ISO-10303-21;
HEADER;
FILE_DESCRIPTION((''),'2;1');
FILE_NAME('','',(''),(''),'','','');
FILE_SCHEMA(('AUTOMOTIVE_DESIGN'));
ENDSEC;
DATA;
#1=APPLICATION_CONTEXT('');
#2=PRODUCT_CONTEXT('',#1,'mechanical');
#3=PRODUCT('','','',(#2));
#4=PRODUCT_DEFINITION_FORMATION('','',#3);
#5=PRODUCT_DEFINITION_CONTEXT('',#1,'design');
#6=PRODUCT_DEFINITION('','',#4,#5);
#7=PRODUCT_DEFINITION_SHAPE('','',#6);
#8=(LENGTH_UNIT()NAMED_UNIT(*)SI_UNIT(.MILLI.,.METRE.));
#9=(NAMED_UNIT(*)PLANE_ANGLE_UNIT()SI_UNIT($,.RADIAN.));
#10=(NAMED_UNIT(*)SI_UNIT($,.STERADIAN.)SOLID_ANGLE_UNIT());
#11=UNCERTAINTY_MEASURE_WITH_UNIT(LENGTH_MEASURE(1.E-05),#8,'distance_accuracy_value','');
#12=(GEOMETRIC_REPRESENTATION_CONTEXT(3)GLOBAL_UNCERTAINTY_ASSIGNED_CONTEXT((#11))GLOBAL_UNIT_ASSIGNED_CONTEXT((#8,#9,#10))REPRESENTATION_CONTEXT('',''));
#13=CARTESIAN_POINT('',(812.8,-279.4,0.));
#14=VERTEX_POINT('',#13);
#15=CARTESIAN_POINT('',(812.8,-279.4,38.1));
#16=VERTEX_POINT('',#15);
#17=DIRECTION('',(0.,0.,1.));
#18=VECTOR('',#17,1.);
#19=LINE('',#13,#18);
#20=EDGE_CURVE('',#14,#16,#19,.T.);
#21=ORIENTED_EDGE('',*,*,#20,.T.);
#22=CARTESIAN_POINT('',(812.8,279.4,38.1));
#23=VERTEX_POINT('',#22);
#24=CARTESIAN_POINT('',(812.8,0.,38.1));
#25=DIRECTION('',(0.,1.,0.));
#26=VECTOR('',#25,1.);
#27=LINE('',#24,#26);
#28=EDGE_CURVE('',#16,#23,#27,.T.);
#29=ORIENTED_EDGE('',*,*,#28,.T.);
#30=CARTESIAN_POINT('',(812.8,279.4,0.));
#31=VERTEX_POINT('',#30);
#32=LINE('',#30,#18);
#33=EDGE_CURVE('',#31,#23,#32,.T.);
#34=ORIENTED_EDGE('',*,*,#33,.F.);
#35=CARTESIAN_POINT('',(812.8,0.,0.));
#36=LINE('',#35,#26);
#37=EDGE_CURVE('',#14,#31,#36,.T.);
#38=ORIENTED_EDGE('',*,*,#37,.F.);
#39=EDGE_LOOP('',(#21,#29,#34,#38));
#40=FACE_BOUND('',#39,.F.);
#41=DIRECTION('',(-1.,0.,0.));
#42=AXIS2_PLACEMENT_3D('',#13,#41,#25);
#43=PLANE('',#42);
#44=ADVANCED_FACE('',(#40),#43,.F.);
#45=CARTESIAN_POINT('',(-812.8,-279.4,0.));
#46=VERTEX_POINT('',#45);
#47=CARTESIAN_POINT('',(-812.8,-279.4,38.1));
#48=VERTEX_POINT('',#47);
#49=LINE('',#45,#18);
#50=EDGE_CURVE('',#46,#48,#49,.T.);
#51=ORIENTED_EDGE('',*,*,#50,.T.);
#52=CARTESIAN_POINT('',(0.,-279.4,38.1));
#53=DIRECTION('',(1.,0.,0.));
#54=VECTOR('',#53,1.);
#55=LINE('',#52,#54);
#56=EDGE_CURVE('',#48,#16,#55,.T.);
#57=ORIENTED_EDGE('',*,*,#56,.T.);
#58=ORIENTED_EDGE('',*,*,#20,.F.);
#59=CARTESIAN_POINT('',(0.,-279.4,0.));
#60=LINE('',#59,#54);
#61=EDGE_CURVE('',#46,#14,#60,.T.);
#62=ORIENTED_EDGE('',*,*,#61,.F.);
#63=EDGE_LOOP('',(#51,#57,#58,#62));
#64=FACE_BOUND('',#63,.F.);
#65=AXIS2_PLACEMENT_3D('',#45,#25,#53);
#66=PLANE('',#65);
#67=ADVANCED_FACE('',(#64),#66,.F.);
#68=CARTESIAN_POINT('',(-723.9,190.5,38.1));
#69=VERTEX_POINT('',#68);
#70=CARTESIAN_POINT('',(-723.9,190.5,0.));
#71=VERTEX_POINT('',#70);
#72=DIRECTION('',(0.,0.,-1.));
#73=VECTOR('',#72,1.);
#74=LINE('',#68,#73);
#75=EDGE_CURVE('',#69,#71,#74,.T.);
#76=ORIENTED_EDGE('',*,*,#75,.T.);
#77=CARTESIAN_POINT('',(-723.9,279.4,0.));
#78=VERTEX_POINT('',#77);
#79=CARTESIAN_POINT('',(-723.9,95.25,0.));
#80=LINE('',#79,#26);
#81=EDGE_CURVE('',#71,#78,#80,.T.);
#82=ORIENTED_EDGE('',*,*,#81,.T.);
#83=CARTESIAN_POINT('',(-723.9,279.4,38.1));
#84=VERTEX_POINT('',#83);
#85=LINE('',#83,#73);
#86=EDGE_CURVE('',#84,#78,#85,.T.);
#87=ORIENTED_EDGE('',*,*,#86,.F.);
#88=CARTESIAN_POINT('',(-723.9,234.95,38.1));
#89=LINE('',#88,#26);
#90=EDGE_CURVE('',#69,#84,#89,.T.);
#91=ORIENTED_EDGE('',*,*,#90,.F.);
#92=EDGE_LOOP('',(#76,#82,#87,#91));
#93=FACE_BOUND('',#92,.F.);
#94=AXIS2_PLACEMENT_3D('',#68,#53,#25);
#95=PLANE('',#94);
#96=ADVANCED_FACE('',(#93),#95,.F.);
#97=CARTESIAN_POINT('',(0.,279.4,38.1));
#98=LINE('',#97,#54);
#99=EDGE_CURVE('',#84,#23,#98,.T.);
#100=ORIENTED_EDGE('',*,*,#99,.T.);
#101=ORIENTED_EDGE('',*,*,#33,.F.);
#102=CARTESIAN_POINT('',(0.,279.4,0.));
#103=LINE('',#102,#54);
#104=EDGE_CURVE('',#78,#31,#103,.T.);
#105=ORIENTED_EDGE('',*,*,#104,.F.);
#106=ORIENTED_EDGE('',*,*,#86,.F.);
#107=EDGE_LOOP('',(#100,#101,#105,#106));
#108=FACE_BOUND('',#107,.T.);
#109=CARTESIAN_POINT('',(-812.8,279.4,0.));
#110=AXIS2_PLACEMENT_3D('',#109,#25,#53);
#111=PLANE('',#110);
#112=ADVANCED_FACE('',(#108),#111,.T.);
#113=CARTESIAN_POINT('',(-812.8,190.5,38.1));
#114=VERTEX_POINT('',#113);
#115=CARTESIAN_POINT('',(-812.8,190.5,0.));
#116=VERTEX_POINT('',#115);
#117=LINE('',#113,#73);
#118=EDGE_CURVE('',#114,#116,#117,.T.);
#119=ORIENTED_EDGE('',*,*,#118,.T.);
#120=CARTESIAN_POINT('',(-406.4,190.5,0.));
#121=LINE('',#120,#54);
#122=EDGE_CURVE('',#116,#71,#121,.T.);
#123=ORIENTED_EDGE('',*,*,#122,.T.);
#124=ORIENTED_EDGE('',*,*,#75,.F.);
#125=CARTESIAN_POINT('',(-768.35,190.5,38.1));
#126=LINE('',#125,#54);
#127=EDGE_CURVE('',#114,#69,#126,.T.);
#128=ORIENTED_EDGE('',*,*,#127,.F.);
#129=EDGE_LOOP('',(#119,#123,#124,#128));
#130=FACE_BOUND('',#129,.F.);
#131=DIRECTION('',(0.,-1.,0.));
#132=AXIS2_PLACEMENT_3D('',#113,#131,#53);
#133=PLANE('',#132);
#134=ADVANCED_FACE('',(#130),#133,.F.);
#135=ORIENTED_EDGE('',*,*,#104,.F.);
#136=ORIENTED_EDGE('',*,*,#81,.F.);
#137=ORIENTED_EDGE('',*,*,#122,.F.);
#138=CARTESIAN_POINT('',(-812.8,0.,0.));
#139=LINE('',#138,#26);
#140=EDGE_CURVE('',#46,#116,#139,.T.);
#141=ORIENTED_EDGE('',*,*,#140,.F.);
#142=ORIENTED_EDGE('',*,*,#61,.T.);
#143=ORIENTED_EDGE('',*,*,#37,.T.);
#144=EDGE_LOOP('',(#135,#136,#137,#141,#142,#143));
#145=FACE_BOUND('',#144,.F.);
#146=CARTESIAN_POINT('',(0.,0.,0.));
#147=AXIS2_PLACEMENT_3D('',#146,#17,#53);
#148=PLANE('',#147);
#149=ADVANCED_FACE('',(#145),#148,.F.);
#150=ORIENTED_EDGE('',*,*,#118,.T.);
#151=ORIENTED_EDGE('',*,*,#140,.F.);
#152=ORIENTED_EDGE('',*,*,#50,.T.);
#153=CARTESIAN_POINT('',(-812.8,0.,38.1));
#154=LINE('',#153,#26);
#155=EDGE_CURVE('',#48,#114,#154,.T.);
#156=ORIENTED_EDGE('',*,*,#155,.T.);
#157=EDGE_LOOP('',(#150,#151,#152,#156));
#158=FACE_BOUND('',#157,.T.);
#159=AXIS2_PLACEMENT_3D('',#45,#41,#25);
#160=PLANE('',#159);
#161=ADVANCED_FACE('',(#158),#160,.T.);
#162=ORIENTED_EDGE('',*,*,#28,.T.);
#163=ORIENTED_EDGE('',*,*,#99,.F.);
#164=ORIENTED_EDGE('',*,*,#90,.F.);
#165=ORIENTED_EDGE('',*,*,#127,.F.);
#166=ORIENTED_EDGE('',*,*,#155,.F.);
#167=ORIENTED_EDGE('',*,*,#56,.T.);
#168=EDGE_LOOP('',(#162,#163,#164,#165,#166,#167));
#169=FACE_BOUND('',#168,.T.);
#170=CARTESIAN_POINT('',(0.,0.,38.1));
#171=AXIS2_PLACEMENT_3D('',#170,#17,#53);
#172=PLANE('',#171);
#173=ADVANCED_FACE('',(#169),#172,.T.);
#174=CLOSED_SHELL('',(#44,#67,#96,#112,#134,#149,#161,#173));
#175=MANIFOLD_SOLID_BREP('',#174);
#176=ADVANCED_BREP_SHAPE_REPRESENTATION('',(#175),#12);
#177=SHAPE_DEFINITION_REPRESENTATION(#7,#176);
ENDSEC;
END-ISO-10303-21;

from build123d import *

# Parameters (mm, degrees)
F0_W     = 1625.6
F0_H     = 558.8
F1_DEPTH = 38.1
F2_W     = 88.9
F2_H     = 88.9
F3_DEPTH = 38.101


# Not quite as in the source:
# - a feature names something its author has since deleted; it is built from what else it names


with BuildPart() as f1:
    # F0 (on Top) → F1 (new body)
    with BuildSketch(Plane.XY):
        Rectangle(F0_W, F0_H)
    extrude(amount=F1_DEPTH)

    # F2 (on face) → F3 (cut, through all)
    with BuildSketch(Plane.XY.offset(38.1)):
        with Locations((-768.35, 234.95)):
            Rectangle(F2_W, F2_H)
    extrude(amount=-F3_DEPTH, mode=Mode.SUBTRACT)


solid = f1.part
